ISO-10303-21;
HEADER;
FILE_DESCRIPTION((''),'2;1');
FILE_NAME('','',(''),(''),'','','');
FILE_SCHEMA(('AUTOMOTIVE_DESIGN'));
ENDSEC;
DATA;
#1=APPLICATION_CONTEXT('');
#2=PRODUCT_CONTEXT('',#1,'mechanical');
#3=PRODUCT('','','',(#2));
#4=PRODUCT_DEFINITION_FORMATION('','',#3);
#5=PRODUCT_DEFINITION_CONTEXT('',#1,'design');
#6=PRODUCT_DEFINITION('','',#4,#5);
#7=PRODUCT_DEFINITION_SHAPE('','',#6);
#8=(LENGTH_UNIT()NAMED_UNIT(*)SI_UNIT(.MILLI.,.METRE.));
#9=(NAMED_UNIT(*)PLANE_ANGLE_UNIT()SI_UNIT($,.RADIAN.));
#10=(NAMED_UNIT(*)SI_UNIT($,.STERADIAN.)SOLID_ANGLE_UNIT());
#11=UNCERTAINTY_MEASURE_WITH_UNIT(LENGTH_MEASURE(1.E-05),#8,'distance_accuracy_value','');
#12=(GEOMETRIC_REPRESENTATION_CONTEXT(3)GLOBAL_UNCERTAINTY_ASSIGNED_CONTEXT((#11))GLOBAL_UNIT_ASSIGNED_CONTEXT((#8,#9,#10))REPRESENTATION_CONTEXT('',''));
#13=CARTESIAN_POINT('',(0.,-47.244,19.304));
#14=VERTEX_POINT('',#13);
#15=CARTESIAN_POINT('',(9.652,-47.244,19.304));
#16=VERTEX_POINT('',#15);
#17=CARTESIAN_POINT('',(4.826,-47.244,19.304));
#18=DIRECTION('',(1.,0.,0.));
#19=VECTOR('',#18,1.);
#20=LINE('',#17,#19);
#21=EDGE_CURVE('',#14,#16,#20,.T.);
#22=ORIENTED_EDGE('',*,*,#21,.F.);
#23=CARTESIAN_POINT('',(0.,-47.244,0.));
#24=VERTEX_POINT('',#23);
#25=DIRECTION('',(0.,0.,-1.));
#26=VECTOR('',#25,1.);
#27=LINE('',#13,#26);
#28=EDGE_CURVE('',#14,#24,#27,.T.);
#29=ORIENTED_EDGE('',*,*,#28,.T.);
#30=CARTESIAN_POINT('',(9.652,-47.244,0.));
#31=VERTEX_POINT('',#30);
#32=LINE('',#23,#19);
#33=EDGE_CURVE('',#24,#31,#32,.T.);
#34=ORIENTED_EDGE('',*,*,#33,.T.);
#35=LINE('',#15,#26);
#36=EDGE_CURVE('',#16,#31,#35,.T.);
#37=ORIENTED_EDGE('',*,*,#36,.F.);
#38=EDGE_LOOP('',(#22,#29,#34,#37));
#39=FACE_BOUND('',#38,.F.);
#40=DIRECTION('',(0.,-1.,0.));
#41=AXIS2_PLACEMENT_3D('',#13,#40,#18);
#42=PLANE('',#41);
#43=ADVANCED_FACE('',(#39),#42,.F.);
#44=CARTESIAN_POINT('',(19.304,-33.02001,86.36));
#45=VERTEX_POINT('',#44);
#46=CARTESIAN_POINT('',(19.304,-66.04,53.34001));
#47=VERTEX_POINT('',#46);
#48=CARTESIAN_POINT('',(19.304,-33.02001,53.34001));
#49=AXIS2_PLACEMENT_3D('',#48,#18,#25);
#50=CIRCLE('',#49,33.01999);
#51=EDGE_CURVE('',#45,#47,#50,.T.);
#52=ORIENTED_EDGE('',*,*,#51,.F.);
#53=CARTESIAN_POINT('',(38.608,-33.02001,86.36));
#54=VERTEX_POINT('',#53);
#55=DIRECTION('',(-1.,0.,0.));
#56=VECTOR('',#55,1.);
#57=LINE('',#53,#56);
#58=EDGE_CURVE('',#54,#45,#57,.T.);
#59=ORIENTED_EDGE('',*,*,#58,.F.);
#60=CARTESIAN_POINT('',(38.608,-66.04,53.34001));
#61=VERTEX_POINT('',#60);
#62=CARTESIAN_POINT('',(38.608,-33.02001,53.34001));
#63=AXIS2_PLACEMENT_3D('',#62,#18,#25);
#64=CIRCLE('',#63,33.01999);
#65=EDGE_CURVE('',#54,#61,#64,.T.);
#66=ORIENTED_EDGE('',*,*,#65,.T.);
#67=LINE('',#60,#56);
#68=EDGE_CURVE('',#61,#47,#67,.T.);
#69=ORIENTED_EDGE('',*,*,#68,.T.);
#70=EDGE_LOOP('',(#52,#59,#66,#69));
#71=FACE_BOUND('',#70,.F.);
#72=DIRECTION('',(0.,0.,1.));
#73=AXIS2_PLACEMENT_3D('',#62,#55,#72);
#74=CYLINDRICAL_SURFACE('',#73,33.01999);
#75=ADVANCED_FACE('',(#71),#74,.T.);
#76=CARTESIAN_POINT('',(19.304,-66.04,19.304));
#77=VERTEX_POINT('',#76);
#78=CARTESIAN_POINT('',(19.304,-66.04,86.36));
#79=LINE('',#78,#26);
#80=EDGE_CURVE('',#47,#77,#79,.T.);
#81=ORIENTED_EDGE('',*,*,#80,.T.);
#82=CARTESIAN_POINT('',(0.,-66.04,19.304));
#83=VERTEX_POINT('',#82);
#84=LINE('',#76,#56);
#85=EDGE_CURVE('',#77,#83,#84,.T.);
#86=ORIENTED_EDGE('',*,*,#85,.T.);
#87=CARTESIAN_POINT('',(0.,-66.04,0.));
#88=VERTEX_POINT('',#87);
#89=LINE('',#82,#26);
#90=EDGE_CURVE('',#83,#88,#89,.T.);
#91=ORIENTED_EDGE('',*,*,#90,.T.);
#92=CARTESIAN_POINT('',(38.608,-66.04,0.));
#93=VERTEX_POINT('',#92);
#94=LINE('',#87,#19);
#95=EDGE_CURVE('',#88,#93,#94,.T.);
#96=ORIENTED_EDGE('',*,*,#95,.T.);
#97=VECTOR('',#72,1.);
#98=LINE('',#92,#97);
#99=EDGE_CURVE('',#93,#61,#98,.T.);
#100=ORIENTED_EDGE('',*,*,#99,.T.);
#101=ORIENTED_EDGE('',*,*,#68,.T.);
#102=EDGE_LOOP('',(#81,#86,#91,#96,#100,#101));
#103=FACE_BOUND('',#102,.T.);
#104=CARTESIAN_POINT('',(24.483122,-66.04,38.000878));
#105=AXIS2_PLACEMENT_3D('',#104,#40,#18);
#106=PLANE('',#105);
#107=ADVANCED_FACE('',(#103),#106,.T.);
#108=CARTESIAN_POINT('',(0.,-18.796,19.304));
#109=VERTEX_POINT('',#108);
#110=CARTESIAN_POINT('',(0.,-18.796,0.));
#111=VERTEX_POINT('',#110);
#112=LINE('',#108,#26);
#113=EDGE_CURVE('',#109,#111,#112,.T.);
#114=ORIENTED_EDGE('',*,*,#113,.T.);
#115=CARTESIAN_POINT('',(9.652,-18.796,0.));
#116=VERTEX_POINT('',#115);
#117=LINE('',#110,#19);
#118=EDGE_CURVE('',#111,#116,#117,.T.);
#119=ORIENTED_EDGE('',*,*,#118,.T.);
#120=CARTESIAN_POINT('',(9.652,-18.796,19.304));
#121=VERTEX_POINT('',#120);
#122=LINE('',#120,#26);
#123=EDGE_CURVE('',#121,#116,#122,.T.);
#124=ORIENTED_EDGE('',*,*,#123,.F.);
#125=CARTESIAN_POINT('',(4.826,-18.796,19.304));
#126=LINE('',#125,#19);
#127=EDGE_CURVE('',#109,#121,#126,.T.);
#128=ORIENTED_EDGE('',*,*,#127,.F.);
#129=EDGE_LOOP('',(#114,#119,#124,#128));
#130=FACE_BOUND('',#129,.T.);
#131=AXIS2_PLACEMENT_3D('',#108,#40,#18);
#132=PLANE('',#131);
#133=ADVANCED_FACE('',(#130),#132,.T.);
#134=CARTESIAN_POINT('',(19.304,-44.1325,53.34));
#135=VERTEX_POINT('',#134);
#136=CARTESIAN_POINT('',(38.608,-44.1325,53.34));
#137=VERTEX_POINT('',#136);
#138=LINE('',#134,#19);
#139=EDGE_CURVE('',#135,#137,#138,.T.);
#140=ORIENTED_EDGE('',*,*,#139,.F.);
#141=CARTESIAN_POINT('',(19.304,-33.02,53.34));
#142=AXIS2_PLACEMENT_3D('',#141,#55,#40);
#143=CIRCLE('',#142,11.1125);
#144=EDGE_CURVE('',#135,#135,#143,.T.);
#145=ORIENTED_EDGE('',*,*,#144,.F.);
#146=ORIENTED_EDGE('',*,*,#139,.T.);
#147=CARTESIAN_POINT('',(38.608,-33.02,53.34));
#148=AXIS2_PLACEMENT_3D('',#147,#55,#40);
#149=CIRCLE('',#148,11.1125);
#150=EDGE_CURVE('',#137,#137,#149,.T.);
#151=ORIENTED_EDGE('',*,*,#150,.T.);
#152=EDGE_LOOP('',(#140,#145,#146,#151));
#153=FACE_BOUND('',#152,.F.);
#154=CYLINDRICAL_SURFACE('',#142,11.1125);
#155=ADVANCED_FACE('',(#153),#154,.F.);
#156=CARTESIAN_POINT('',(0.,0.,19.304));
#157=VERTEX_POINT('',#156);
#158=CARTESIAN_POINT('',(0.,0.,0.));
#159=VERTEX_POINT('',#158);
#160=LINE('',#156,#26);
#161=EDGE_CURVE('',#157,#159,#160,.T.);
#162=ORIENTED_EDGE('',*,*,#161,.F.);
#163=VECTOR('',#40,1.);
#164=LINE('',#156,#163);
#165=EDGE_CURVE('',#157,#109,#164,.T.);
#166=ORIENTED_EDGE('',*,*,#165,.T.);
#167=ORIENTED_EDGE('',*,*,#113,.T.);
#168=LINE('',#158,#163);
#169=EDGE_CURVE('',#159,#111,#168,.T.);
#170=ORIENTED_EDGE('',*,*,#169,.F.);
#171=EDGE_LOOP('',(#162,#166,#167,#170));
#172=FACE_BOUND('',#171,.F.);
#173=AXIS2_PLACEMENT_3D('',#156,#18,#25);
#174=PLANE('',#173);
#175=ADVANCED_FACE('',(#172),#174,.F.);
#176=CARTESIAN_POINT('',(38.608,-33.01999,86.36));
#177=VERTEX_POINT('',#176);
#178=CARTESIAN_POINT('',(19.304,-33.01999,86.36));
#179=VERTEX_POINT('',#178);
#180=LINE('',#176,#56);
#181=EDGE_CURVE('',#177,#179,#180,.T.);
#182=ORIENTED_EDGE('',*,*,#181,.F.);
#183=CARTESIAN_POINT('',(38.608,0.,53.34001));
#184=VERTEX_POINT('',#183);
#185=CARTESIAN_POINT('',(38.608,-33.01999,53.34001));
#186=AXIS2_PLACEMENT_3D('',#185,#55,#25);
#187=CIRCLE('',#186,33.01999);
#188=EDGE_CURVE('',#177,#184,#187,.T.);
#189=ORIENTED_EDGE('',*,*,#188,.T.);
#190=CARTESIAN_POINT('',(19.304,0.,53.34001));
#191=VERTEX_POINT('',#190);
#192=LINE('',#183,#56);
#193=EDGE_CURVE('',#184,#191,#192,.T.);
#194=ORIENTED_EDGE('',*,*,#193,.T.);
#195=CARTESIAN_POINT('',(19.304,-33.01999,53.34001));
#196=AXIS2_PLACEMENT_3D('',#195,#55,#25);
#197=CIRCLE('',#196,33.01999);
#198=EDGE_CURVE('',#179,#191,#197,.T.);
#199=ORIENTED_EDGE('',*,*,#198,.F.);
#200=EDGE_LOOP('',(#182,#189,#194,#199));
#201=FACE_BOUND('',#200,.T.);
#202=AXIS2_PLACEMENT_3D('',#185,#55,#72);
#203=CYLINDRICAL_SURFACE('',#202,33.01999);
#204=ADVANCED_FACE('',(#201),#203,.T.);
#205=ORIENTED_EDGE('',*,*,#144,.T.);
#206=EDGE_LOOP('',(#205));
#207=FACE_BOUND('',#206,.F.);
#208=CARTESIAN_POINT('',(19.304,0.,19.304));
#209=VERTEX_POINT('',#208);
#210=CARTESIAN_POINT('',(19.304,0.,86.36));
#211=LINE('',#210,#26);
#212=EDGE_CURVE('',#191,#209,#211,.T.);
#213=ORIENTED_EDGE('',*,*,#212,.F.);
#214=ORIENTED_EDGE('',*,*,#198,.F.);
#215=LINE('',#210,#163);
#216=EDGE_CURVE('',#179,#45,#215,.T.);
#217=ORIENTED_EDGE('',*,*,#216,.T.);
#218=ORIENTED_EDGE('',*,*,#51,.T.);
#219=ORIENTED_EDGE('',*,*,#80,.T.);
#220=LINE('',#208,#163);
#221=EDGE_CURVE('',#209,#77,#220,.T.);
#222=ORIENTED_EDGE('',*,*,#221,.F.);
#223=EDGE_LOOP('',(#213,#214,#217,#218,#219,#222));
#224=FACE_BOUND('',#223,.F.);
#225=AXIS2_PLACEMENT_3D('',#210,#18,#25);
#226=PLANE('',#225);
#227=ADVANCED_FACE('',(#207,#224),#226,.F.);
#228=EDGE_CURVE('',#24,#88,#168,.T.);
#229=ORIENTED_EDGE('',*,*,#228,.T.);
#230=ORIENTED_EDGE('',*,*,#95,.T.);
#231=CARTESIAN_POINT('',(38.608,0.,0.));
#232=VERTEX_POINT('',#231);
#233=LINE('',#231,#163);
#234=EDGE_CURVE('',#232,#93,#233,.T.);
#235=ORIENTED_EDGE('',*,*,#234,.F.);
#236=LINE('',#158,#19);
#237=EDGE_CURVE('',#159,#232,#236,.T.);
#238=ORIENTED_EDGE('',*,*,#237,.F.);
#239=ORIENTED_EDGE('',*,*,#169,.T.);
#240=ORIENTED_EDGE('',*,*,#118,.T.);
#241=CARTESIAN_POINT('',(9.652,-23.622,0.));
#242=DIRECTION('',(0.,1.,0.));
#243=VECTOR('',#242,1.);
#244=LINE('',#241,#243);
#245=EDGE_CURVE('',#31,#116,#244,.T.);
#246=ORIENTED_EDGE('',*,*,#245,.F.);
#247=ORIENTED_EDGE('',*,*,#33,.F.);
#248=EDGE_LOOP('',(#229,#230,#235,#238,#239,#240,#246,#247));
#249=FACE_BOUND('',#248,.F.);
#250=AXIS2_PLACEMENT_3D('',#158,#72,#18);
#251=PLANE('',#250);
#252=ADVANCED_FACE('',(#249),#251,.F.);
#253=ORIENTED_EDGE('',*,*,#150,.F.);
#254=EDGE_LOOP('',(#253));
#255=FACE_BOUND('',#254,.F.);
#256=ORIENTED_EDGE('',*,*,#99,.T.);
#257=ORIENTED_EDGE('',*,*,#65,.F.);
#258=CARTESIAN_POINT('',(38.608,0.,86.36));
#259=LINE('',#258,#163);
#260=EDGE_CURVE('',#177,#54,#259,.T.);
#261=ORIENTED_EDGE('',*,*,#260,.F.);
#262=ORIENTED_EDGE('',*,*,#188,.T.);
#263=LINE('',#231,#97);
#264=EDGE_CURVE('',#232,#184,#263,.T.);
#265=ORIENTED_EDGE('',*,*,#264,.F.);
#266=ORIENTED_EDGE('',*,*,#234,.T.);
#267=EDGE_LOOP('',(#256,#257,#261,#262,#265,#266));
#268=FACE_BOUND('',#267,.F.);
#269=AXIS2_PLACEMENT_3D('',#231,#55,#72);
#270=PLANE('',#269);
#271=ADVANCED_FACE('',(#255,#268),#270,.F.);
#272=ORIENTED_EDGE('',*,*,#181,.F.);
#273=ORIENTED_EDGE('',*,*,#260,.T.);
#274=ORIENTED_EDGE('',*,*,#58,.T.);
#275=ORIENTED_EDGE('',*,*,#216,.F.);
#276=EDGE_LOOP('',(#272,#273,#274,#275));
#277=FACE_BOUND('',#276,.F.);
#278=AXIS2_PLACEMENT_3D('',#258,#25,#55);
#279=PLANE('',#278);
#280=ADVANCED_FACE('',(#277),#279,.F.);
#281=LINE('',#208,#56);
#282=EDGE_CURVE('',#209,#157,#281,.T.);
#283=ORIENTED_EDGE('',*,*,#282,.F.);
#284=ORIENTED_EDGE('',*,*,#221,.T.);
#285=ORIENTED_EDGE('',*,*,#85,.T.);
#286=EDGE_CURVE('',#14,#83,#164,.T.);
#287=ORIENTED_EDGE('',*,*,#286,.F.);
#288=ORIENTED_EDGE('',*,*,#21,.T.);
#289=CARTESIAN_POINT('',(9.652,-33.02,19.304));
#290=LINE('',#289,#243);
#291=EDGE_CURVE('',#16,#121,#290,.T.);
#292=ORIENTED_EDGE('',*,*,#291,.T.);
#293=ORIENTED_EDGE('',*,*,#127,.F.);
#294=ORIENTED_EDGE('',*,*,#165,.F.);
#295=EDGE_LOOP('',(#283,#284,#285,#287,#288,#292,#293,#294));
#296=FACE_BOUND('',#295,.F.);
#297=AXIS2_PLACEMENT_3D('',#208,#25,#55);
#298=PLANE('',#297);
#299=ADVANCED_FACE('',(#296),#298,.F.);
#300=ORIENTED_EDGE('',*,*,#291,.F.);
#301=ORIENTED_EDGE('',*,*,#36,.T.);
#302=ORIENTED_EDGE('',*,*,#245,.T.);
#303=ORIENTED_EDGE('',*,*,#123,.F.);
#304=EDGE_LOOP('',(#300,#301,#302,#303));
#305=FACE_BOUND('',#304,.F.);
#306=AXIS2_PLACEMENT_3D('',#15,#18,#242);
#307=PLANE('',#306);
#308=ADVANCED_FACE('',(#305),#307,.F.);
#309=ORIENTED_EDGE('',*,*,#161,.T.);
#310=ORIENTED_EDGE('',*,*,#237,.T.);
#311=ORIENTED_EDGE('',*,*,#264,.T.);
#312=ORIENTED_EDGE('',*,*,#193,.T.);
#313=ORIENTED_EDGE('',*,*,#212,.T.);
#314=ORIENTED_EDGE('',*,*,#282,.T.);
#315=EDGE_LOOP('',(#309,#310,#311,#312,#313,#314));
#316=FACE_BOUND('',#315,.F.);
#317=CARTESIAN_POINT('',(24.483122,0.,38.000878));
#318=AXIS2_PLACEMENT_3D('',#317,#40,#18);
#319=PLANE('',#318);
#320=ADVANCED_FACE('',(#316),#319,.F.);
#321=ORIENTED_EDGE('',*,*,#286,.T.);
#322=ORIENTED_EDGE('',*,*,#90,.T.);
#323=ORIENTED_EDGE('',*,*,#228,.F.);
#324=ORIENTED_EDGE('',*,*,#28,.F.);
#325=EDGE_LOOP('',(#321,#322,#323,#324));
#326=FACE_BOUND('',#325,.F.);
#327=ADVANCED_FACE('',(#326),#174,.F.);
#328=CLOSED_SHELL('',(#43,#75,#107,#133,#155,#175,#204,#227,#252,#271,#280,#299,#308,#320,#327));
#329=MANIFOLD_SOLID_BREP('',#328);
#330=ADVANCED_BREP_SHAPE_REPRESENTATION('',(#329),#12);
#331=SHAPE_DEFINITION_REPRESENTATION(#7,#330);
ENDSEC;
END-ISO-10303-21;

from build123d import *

# Parameters (mm, degrees)
F1_DEPTH = 66.04
F2_R     = 33.01999
F4_W     = 9.652
F4_H     = 28.448
F5_DEPTH = 30.226
F3_R     = 11.1125
F6_DEPTH = 63.246


# Not quite as in the source:
# - a fillet or chamfer is up to 0.001 mm smaller than in the source, because OpenCascade refuses the exact size


with BuildPart() as f1:
    # F0 (on Front) → F1 (new body)
    with BuildSketch(Plane.XZ):
        Polygon((0, 19.304), (0, 0), (38.608, 0), (38.608, 86.36), (19.304, 86.36), (19.304, 19.304), align=None)
    extrude(amount=F1_DEPTH)

    # F2 (radius 33.02 in the source; OpenCascade refuses exactly that, so slightly less here)
    f2_edges = [f1.edges().sort_by_distance(p)[0] for p in [
        (28.956, -66.04, 86.36),
        (28.956, 0, 86.36),
    ]]
    fillet(f2_edges, radius=F2_R)

    # F4 (on face) → F5 (cut)
    with BuildSketch(Plane.XY.offset(19.304)):
        with Locations((4.826, -33.02)):
            Rectangle(F4_W, F4_H)
    extrude(amount=-F5_DEPTH, mode=Mode.SUBTRACT)

    # F3 (on face) → F6 (cut)
    with BuildSketch(Plane(origin=(19.304, 0, 0), x_dir=(0, -1, 0), z_dir=(-1, 0, 0))):
        with Locations((33.02, 53.34)):
            Circle(F3_R)
    extrude(amount=-F6_DEPTH, mode=Mode.SUBTRACT)


solid = f1.part
